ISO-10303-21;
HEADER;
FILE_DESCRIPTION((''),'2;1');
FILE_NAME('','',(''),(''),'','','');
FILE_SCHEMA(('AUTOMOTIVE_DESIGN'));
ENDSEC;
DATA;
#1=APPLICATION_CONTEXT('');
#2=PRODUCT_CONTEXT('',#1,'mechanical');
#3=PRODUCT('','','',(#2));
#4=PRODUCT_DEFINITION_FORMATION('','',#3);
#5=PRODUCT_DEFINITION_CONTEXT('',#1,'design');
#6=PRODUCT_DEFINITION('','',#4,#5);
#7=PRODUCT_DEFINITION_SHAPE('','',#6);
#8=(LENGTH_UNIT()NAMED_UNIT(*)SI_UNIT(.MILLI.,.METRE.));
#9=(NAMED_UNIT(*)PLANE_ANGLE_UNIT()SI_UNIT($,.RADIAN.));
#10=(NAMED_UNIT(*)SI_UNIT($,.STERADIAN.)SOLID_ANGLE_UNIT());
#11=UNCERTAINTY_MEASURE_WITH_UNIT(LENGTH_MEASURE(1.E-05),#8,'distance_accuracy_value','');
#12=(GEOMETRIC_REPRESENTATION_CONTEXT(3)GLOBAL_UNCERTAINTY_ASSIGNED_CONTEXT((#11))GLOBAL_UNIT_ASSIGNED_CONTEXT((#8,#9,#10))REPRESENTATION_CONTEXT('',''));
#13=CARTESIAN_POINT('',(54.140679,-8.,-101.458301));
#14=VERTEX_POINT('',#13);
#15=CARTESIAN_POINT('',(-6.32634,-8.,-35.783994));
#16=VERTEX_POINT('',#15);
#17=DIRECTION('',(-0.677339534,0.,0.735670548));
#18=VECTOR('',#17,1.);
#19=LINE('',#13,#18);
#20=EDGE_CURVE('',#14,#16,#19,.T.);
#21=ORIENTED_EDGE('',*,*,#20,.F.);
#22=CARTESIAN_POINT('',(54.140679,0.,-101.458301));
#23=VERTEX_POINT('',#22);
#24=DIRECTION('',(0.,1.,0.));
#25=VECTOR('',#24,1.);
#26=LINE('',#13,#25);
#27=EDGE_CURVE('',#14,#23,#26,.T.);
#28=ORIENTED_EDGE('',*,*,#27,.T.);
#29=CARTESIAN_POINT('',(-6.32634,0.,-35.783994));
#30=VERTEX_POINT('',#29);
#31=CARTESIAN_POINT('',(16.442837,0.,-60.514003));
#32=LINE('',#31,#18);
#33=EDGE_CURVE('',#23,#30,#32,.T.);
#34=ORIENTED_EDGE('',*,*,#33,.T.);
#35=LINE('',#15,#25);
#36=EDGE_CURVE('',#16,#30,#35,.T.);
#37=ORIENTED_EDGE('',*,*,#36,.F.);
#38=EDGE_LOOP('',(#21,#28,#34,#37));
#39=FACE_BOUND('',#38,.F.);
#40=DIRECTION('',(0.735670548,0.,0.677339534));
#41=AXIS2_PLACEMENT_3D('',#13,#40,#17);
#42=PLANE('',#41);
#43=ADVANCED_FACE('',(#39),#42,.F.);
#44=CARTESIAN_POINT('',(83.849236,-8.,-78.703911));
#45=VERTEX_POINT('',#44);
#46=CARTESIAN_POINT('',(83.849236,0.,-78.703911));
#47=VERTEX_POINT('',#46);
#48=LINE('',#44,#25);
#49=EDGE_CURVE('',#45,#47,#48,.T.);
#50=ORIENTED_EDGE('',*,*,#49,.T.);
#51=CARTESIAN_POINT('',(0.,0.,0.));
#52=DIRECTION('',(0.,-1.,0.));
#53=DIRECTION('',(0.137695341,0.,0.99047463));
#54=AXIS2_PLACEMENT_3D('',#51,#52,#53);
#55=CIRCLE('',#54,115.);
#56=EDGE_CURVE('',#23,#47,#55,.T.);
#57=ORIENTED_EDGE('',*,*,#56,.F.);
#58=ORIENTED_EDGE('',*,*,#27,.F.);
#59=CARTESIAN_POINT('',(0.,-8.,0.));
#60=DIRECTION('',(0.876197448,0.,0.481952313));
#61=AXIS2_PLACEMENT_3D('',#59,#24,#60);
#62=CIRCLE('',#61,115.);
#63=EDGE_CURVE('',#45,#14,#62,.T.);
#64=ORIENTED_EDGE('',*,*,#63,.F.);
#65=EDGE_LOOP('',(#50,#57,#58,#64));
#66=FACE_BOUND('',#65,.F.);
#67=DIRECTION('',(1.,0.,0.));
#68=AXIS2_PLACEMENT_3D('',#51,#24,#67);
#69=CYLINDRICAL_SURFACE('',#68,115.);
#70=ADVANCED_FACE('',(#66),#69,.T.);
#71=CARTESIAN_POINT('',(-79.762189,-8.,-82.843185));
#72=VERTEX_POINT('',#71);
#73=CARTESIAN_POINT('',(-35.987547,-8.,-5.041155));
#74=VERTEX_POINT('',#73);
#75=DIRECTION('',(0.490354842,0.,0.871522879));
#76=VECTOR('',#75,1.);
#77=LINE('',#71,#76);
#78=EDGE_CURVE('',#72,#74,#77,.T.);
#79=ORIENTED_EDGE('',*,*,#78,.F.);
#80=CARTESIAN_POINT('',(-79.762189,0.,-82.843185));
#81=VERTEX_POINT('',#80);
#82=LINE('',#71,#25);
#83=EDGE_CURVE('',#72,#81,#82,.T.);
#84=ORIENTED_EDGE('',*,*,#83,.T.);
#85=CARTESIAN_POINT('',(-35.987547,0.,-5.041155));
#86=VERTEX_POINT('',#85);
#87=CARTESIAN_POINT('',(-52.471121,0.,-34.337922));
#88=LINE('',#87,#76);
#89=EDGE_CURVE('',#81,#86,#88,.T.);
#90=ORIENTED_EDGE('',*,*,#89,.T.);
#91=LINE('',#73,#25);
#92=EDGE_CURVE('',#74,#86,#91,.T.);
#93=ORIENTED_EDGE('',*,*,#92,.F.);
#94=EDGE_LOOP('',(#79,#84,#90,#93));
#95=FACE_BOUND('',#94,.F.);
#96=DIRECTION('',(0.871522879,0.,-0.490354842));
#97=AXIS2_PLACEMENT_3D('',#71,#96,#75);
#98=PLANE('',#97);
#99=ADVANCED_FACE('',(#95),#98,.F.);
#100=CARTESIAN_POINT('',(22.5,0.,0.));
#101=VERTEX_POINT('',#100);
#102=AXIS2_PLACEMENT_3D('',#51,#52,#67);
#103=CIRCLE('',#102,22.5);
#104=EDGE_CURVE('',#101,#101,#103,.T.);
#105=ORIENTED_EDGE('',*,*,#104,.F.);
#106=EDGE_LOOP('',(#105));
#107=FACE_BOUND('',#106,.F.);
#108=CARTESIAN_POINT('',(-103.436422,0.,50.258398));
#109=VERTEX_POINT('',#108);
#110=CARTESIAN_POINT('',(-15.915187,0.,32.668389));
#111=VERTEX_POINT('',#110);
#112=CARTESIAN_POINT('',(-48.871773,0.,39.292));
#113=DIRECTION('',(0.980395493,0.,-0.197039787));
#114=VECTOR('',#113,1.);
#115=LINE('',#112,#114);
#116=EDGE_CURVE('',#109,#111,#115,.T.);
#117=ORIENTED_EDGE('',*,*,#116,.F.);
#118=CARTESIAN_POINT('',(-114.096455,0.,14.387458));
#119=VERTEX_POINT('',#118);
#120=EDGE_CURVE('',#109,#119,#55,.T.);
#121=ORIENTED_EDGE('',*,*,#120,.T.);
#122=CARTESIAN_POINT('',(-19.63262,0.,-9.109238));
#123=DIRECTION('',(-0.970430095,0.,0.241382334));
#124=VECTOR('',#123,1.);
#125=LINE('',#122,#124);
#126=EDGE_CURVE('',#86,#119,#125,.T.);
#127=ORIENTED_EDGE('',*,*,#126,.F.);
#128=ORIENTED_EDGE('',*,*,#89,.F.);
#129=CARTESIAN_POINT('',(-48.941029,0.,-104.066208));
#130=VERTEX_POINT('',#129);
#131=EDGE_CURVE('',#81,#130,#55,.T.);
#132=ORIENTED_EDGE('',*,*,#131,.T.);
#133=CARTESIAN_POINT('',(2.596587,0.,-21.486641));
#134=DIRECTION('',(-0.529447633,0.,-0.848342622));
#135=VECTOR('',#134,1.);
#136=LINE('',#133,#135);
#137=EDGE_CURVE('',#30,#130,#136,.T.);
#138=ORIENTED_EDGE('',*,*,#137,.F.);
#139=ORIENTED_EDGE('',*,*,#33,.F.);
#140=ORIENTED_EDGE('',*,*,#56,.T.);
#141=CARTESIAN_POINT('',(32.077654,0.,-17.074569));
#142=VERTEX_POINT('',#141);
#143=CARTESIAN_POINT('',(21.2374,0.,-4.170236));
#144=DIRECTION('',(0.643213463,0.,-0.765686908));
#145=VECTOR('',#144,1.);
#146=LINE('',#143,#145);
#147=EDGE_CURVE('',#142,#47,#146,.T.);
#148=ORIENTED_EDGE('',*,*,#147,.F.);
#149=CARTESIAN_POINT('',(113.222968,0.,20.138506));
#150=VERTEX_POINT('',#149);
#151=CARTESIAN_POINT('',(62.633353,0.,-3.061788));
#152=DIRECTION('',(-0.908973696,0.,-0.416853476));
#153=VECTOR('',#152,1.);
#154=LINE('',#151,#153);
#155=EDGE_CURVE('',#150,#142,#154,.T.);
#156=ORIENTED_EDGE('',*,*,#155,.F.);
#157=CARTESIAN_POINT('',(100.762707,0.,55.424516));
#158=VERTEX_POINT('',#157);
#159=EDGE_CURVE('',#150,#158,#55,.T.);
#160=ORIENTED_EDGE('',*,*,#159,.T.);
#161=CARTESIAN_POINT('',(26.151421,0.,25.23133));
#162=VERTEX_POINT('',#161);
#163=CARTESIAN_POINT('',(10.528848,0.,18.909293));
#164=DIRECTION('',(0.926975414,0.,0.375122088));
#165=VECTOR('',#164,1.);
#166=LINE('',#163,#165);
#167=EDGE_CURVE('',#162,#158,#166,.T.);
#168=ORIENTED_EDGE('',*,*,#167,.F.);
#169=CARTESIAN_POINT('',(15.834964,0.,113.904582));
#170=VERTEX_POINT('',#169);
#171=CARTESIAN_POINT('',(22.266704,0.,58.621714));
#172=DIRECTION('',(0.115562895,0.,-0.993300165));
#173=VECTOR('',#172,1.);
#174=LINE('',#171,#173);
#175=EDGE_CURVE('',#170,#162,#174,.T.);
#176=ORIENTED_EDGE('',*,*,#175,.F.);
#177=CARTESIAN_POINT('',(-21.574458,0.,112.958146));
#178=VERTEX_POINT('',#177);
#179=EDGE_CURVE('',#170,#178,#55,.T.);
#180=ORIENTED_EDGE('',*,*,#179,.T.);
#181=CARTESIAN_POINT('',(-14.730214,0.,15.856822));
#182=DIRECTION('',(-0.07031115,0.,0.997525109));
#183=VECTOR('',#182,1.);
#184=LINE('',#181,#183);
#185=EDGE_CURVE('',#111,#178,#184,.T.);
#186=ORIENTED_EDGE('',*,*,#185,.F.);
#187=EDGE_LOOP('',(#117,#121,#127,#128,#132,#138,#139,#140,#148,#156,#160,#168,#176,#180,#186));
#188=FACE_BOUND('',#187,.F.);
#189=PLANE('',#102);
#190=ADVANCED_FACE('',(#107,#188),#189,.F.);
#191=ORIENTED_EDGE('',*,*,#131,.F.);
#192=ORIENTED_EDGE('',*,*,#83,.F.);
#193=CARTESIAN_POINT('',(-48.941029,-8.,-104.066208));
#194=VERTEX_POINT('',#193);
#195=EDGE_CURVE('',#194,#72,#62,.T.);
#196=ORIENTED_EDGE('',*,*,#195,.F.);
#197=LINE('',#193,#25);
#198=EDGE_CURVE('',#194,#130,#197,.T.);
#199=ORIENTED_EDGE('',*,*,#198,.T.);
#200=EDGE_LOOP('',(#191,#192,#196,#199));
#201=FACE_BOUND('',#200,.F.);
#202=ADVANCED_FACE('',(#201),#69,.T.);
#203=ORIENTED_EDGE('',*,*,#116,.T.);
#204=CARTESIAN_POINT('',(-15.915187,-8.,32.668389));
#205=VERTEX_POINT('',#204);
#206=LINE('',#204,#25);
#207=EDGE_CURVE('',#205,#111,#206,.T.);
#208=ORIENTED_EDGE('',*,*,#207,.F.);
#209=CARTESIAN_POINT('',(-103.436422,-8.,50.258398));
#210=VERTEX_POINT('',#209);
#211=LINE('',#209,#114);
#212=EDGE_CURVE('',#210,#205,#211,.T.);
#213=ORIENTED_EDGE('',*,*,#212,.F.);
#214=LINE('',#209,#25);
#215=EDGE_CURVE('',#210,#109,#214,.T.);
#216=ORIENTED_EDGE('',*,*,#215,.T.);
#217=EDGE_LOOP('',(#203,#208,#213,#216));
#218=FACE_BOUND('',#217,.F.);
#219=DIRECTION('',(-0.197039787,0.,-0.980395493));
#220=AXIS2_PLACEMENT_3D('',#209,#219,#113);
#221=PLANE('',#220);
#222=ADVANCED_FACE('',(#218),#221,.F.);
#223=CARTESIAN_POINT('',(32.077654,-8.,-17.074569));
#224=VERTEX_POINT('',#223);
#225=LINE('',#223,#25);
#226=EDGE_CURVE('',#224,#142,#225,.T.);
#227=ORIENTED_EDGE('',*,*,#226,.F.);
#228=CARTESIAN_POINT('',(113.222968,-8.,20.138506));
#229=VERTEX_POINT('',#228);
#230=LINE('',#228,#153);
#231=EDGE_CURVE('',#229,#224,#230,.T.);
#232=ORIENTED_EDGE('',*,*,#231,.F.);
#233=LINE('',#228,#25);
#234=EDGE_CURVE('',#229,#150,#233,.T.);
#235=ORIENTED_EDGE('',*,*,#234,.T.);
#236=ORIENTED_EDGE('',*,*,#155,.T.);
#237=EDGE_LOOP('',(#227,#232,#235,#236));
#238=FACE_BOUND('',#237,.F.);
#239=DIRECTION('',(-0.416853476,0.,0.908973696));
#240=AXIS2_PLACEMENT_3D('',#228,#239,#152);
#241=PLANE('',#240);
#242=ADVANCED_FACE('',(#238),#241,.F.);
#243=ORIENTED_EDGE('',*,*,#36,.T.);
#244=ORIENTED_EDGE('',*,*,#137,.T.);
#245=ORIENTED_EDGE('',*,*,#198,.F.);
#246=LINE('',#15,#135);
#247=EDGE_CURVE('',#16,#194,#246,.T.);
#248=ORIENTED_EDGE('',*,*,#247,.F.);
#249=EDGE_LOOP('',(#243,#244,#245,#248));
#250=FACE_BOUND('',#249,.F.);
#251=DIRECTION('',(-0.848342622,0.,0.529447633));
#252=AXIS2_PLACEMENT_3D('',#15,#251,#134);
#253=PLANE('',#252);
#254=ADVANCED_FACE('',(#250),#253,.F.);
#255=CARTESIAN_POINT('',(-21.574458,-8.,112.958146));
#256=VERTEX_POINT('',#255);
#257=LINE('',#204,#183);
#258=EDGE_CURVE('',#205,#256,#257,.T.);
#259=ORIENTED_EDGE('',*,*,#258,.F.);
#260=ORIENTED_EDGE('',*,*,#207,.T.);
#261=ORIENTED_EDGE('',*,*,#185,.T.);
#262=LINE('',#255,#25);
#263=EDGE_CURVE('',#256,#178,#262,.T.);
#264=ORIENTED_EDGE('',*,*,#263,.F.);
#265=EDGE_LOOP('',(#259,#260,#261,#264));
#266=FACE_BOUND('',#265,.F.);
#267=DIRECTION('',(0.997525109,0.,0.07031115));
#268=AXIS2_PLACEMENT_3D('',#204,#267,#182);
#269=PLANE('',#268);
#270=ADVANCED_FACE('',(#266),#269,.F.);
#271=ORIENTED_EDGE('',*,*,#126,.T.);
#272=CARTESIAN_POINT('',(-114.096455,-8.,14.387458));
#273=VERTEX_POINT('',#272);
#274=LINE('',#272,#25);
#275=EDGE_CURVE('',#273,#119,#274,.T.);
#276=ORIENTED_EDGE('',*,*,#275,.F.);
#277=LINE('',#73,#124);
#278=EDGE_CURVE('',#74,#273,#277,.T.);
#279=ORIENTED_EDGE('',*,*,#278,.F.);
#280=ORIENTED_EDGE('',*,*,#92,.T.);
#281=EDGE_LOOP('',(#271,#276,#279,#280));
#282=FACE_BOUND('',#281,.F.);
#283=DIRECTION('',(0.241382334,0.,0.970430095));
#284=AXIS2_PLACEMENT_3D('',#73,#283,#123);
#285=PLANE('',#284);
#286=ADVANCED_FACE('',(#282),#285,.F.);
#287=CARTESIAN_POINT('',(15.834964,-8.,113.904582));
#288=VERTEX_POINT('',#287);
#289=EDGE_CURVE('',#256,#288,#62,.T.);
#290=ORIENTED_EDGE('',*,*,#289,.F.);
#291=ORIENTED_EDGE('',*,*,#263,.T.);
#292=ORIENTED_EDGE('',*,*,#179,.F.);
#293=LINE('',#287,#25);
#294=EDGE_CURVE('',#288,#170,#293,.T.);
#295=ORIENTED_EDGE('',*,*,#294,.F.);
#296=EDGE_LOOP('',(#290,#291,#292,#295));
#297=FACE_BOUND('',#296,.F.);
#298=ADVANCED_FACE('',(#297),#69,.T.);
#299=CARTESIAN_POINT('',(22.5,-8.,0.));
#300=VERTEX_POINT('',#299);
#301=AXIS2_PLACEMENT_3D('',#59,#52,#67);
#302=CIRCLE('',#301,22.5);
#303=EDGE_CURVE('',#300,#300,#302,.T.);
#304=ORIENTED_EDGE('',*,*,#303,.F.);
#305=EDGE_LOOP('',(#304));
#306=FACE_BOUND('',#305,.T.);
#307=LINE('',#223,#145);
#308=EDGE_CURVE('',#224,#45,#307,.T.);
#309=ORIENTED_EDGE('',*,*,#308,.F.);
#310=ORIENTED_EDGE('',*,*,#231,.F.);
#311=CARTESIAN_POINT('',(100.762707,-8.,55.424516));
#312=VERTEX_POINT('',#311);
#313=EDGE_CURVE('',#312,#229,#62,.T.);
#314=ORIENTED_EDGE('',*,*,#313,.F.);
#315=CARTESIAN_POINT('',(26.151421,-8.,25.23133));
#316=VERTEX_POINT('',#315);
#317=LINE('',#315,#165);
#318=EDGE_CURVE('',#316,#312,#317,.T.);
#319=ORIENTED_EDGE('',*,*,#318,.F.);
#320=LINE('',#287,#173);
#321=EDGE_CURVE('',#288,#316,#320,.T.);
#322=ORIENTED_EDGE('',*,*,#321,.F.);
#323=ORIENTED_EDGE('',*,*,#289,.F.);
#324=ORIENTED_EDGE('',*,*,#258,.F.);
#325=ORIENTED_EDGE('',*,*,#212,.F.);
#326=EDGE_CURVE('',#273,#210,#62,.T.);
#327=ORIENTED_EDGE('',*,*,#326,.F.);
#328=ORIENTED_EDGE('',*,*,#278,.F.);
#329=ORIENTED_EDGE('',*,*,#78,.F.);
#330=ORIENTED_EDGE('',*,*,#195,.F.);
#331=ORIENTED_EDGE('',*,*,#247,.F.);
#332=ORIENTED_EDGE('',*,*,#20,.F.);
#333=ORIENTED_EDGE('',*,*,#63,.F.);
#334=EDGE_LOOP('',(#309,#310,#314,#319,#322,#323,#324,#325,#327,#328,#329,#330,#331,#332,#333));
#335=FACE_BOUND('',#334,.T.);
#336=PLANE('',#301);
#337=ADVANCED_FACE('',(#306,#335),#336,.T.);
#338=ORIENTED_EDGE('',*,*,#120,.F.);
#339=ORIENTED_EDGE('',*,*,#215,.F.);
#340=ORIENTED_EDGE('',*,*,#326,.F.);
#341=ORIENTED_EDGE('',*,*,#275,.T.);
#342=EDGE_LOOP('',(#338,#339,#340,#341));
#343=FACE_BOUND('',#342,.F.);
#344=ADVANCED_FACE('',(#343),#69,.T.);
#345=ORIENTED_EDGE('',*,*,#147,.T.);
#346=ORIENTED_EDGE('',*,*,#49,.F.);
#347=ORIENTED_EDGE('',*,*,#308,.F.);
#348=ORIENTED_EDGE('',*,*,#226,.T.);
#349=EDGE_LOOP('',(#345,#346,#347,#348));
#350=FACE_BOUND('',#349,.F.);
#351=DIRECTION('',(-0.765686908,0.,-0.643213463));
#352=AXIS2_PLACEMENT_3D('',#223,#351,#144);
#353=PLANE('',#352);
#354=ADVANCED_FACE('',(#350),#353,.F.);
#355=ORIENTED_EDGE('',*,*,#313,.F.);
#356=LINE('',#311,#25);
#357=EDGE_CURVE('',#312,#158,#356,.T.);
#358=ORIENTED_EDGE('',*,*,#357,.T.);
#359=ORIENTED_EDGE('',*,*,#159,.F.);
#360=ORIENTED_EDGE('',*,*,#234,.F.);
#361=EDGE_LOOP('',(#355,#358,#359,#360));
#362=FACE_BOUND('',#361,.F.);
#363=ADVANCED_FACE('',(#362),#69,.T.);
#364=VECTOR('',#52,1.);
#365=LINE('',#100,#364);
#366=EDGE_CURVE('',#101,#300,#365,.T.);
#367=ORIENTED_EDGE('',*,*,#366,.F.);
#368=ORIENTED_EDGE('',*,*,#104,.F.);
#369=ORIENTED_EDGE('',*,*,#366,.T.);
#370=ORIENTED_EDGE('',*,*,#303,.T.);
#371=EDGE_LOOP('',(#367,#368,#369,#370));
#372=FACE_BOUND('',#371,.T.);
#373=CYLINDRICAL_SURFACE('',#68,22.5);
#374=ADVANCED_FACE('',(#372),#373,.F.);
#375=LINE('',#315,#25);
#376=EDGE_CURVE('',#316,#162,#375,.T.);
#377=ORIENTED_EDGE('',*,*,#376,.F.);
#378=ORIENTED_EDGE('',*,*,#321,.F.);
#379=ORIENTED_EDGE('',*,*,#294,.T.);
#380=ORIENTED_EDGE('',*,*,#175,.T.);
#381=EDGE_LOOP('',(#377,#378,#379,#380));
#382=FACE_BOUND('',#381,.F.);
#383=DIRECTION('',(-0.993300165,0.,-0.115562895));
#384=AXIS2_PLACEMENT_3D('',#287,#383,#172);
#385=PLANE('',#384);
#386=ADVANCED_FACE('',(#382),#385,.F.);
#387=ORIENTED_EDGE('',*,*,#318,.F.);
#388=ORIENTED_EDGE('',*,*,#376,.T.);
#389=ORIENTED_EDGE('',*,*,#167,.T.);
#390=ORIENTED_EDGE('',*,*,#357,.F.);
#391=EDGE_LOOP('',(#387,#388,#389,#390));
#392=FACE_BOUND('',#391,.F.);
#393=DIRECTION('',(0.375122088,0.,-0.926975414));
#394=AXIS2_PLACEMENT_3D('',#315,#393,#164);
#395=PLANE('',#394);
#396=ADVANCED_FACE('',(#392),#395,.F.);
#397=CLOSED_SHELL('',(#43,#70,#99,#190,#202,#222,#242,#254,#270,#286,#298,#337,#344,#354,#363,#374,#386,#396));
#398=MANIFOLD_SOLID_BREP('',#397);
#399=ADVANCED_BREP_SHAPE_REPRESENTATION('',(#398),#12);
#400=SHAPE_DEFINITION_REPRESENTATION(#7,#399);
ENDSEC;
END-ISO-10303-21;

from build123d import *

# Parameters (mm, degrees)
F0_R            = 115
F0_R_2          = 22.5
F1_DEPTH        = 8
F3_DEPTH        = 25
F3_COPIES_COUNT = 5


# Not quite as in the source:
# - a pattern or mirror of a feature is missing from the dataset's text; its kind, count and spacing are read off the source's solid


with BuildPart() as f1:
    # F0 (on Front) → F1 (new body)
    with BuildSketch(Plane.XZ):
        Circle(F0_R)
        Circle(F0_R_2, mode=Mode.SUBTRACT)
    extrude(amount=F1_DEPTH)

    # F2 (on face) → F3 (cut)
    with BuildSketch(Plane.XZ.offset(8)):
        Polygon((100.7627065135, 144.0385852402), (15.8349641698, 113.9045824791), (26.1514205486, 25.2313297242), (100.7627065135, 55.4245160203), align=None)
    f3 = extrude(amount=-F3_DEPTH, mode=Mode.SUBTRACT)

    # F3_copies: F3 ×5 about axis
    f3_copies_axis = Axis((0, 0, 0), (0, 1, 0))
    for i in range(1, F3_COPIES_COUNT):
        add(f3.rotate(f3_copies_axis, i * 360 / F3_COPIES_COUNT), mode=Mode.SUBTRACT)


solid = f1.part
